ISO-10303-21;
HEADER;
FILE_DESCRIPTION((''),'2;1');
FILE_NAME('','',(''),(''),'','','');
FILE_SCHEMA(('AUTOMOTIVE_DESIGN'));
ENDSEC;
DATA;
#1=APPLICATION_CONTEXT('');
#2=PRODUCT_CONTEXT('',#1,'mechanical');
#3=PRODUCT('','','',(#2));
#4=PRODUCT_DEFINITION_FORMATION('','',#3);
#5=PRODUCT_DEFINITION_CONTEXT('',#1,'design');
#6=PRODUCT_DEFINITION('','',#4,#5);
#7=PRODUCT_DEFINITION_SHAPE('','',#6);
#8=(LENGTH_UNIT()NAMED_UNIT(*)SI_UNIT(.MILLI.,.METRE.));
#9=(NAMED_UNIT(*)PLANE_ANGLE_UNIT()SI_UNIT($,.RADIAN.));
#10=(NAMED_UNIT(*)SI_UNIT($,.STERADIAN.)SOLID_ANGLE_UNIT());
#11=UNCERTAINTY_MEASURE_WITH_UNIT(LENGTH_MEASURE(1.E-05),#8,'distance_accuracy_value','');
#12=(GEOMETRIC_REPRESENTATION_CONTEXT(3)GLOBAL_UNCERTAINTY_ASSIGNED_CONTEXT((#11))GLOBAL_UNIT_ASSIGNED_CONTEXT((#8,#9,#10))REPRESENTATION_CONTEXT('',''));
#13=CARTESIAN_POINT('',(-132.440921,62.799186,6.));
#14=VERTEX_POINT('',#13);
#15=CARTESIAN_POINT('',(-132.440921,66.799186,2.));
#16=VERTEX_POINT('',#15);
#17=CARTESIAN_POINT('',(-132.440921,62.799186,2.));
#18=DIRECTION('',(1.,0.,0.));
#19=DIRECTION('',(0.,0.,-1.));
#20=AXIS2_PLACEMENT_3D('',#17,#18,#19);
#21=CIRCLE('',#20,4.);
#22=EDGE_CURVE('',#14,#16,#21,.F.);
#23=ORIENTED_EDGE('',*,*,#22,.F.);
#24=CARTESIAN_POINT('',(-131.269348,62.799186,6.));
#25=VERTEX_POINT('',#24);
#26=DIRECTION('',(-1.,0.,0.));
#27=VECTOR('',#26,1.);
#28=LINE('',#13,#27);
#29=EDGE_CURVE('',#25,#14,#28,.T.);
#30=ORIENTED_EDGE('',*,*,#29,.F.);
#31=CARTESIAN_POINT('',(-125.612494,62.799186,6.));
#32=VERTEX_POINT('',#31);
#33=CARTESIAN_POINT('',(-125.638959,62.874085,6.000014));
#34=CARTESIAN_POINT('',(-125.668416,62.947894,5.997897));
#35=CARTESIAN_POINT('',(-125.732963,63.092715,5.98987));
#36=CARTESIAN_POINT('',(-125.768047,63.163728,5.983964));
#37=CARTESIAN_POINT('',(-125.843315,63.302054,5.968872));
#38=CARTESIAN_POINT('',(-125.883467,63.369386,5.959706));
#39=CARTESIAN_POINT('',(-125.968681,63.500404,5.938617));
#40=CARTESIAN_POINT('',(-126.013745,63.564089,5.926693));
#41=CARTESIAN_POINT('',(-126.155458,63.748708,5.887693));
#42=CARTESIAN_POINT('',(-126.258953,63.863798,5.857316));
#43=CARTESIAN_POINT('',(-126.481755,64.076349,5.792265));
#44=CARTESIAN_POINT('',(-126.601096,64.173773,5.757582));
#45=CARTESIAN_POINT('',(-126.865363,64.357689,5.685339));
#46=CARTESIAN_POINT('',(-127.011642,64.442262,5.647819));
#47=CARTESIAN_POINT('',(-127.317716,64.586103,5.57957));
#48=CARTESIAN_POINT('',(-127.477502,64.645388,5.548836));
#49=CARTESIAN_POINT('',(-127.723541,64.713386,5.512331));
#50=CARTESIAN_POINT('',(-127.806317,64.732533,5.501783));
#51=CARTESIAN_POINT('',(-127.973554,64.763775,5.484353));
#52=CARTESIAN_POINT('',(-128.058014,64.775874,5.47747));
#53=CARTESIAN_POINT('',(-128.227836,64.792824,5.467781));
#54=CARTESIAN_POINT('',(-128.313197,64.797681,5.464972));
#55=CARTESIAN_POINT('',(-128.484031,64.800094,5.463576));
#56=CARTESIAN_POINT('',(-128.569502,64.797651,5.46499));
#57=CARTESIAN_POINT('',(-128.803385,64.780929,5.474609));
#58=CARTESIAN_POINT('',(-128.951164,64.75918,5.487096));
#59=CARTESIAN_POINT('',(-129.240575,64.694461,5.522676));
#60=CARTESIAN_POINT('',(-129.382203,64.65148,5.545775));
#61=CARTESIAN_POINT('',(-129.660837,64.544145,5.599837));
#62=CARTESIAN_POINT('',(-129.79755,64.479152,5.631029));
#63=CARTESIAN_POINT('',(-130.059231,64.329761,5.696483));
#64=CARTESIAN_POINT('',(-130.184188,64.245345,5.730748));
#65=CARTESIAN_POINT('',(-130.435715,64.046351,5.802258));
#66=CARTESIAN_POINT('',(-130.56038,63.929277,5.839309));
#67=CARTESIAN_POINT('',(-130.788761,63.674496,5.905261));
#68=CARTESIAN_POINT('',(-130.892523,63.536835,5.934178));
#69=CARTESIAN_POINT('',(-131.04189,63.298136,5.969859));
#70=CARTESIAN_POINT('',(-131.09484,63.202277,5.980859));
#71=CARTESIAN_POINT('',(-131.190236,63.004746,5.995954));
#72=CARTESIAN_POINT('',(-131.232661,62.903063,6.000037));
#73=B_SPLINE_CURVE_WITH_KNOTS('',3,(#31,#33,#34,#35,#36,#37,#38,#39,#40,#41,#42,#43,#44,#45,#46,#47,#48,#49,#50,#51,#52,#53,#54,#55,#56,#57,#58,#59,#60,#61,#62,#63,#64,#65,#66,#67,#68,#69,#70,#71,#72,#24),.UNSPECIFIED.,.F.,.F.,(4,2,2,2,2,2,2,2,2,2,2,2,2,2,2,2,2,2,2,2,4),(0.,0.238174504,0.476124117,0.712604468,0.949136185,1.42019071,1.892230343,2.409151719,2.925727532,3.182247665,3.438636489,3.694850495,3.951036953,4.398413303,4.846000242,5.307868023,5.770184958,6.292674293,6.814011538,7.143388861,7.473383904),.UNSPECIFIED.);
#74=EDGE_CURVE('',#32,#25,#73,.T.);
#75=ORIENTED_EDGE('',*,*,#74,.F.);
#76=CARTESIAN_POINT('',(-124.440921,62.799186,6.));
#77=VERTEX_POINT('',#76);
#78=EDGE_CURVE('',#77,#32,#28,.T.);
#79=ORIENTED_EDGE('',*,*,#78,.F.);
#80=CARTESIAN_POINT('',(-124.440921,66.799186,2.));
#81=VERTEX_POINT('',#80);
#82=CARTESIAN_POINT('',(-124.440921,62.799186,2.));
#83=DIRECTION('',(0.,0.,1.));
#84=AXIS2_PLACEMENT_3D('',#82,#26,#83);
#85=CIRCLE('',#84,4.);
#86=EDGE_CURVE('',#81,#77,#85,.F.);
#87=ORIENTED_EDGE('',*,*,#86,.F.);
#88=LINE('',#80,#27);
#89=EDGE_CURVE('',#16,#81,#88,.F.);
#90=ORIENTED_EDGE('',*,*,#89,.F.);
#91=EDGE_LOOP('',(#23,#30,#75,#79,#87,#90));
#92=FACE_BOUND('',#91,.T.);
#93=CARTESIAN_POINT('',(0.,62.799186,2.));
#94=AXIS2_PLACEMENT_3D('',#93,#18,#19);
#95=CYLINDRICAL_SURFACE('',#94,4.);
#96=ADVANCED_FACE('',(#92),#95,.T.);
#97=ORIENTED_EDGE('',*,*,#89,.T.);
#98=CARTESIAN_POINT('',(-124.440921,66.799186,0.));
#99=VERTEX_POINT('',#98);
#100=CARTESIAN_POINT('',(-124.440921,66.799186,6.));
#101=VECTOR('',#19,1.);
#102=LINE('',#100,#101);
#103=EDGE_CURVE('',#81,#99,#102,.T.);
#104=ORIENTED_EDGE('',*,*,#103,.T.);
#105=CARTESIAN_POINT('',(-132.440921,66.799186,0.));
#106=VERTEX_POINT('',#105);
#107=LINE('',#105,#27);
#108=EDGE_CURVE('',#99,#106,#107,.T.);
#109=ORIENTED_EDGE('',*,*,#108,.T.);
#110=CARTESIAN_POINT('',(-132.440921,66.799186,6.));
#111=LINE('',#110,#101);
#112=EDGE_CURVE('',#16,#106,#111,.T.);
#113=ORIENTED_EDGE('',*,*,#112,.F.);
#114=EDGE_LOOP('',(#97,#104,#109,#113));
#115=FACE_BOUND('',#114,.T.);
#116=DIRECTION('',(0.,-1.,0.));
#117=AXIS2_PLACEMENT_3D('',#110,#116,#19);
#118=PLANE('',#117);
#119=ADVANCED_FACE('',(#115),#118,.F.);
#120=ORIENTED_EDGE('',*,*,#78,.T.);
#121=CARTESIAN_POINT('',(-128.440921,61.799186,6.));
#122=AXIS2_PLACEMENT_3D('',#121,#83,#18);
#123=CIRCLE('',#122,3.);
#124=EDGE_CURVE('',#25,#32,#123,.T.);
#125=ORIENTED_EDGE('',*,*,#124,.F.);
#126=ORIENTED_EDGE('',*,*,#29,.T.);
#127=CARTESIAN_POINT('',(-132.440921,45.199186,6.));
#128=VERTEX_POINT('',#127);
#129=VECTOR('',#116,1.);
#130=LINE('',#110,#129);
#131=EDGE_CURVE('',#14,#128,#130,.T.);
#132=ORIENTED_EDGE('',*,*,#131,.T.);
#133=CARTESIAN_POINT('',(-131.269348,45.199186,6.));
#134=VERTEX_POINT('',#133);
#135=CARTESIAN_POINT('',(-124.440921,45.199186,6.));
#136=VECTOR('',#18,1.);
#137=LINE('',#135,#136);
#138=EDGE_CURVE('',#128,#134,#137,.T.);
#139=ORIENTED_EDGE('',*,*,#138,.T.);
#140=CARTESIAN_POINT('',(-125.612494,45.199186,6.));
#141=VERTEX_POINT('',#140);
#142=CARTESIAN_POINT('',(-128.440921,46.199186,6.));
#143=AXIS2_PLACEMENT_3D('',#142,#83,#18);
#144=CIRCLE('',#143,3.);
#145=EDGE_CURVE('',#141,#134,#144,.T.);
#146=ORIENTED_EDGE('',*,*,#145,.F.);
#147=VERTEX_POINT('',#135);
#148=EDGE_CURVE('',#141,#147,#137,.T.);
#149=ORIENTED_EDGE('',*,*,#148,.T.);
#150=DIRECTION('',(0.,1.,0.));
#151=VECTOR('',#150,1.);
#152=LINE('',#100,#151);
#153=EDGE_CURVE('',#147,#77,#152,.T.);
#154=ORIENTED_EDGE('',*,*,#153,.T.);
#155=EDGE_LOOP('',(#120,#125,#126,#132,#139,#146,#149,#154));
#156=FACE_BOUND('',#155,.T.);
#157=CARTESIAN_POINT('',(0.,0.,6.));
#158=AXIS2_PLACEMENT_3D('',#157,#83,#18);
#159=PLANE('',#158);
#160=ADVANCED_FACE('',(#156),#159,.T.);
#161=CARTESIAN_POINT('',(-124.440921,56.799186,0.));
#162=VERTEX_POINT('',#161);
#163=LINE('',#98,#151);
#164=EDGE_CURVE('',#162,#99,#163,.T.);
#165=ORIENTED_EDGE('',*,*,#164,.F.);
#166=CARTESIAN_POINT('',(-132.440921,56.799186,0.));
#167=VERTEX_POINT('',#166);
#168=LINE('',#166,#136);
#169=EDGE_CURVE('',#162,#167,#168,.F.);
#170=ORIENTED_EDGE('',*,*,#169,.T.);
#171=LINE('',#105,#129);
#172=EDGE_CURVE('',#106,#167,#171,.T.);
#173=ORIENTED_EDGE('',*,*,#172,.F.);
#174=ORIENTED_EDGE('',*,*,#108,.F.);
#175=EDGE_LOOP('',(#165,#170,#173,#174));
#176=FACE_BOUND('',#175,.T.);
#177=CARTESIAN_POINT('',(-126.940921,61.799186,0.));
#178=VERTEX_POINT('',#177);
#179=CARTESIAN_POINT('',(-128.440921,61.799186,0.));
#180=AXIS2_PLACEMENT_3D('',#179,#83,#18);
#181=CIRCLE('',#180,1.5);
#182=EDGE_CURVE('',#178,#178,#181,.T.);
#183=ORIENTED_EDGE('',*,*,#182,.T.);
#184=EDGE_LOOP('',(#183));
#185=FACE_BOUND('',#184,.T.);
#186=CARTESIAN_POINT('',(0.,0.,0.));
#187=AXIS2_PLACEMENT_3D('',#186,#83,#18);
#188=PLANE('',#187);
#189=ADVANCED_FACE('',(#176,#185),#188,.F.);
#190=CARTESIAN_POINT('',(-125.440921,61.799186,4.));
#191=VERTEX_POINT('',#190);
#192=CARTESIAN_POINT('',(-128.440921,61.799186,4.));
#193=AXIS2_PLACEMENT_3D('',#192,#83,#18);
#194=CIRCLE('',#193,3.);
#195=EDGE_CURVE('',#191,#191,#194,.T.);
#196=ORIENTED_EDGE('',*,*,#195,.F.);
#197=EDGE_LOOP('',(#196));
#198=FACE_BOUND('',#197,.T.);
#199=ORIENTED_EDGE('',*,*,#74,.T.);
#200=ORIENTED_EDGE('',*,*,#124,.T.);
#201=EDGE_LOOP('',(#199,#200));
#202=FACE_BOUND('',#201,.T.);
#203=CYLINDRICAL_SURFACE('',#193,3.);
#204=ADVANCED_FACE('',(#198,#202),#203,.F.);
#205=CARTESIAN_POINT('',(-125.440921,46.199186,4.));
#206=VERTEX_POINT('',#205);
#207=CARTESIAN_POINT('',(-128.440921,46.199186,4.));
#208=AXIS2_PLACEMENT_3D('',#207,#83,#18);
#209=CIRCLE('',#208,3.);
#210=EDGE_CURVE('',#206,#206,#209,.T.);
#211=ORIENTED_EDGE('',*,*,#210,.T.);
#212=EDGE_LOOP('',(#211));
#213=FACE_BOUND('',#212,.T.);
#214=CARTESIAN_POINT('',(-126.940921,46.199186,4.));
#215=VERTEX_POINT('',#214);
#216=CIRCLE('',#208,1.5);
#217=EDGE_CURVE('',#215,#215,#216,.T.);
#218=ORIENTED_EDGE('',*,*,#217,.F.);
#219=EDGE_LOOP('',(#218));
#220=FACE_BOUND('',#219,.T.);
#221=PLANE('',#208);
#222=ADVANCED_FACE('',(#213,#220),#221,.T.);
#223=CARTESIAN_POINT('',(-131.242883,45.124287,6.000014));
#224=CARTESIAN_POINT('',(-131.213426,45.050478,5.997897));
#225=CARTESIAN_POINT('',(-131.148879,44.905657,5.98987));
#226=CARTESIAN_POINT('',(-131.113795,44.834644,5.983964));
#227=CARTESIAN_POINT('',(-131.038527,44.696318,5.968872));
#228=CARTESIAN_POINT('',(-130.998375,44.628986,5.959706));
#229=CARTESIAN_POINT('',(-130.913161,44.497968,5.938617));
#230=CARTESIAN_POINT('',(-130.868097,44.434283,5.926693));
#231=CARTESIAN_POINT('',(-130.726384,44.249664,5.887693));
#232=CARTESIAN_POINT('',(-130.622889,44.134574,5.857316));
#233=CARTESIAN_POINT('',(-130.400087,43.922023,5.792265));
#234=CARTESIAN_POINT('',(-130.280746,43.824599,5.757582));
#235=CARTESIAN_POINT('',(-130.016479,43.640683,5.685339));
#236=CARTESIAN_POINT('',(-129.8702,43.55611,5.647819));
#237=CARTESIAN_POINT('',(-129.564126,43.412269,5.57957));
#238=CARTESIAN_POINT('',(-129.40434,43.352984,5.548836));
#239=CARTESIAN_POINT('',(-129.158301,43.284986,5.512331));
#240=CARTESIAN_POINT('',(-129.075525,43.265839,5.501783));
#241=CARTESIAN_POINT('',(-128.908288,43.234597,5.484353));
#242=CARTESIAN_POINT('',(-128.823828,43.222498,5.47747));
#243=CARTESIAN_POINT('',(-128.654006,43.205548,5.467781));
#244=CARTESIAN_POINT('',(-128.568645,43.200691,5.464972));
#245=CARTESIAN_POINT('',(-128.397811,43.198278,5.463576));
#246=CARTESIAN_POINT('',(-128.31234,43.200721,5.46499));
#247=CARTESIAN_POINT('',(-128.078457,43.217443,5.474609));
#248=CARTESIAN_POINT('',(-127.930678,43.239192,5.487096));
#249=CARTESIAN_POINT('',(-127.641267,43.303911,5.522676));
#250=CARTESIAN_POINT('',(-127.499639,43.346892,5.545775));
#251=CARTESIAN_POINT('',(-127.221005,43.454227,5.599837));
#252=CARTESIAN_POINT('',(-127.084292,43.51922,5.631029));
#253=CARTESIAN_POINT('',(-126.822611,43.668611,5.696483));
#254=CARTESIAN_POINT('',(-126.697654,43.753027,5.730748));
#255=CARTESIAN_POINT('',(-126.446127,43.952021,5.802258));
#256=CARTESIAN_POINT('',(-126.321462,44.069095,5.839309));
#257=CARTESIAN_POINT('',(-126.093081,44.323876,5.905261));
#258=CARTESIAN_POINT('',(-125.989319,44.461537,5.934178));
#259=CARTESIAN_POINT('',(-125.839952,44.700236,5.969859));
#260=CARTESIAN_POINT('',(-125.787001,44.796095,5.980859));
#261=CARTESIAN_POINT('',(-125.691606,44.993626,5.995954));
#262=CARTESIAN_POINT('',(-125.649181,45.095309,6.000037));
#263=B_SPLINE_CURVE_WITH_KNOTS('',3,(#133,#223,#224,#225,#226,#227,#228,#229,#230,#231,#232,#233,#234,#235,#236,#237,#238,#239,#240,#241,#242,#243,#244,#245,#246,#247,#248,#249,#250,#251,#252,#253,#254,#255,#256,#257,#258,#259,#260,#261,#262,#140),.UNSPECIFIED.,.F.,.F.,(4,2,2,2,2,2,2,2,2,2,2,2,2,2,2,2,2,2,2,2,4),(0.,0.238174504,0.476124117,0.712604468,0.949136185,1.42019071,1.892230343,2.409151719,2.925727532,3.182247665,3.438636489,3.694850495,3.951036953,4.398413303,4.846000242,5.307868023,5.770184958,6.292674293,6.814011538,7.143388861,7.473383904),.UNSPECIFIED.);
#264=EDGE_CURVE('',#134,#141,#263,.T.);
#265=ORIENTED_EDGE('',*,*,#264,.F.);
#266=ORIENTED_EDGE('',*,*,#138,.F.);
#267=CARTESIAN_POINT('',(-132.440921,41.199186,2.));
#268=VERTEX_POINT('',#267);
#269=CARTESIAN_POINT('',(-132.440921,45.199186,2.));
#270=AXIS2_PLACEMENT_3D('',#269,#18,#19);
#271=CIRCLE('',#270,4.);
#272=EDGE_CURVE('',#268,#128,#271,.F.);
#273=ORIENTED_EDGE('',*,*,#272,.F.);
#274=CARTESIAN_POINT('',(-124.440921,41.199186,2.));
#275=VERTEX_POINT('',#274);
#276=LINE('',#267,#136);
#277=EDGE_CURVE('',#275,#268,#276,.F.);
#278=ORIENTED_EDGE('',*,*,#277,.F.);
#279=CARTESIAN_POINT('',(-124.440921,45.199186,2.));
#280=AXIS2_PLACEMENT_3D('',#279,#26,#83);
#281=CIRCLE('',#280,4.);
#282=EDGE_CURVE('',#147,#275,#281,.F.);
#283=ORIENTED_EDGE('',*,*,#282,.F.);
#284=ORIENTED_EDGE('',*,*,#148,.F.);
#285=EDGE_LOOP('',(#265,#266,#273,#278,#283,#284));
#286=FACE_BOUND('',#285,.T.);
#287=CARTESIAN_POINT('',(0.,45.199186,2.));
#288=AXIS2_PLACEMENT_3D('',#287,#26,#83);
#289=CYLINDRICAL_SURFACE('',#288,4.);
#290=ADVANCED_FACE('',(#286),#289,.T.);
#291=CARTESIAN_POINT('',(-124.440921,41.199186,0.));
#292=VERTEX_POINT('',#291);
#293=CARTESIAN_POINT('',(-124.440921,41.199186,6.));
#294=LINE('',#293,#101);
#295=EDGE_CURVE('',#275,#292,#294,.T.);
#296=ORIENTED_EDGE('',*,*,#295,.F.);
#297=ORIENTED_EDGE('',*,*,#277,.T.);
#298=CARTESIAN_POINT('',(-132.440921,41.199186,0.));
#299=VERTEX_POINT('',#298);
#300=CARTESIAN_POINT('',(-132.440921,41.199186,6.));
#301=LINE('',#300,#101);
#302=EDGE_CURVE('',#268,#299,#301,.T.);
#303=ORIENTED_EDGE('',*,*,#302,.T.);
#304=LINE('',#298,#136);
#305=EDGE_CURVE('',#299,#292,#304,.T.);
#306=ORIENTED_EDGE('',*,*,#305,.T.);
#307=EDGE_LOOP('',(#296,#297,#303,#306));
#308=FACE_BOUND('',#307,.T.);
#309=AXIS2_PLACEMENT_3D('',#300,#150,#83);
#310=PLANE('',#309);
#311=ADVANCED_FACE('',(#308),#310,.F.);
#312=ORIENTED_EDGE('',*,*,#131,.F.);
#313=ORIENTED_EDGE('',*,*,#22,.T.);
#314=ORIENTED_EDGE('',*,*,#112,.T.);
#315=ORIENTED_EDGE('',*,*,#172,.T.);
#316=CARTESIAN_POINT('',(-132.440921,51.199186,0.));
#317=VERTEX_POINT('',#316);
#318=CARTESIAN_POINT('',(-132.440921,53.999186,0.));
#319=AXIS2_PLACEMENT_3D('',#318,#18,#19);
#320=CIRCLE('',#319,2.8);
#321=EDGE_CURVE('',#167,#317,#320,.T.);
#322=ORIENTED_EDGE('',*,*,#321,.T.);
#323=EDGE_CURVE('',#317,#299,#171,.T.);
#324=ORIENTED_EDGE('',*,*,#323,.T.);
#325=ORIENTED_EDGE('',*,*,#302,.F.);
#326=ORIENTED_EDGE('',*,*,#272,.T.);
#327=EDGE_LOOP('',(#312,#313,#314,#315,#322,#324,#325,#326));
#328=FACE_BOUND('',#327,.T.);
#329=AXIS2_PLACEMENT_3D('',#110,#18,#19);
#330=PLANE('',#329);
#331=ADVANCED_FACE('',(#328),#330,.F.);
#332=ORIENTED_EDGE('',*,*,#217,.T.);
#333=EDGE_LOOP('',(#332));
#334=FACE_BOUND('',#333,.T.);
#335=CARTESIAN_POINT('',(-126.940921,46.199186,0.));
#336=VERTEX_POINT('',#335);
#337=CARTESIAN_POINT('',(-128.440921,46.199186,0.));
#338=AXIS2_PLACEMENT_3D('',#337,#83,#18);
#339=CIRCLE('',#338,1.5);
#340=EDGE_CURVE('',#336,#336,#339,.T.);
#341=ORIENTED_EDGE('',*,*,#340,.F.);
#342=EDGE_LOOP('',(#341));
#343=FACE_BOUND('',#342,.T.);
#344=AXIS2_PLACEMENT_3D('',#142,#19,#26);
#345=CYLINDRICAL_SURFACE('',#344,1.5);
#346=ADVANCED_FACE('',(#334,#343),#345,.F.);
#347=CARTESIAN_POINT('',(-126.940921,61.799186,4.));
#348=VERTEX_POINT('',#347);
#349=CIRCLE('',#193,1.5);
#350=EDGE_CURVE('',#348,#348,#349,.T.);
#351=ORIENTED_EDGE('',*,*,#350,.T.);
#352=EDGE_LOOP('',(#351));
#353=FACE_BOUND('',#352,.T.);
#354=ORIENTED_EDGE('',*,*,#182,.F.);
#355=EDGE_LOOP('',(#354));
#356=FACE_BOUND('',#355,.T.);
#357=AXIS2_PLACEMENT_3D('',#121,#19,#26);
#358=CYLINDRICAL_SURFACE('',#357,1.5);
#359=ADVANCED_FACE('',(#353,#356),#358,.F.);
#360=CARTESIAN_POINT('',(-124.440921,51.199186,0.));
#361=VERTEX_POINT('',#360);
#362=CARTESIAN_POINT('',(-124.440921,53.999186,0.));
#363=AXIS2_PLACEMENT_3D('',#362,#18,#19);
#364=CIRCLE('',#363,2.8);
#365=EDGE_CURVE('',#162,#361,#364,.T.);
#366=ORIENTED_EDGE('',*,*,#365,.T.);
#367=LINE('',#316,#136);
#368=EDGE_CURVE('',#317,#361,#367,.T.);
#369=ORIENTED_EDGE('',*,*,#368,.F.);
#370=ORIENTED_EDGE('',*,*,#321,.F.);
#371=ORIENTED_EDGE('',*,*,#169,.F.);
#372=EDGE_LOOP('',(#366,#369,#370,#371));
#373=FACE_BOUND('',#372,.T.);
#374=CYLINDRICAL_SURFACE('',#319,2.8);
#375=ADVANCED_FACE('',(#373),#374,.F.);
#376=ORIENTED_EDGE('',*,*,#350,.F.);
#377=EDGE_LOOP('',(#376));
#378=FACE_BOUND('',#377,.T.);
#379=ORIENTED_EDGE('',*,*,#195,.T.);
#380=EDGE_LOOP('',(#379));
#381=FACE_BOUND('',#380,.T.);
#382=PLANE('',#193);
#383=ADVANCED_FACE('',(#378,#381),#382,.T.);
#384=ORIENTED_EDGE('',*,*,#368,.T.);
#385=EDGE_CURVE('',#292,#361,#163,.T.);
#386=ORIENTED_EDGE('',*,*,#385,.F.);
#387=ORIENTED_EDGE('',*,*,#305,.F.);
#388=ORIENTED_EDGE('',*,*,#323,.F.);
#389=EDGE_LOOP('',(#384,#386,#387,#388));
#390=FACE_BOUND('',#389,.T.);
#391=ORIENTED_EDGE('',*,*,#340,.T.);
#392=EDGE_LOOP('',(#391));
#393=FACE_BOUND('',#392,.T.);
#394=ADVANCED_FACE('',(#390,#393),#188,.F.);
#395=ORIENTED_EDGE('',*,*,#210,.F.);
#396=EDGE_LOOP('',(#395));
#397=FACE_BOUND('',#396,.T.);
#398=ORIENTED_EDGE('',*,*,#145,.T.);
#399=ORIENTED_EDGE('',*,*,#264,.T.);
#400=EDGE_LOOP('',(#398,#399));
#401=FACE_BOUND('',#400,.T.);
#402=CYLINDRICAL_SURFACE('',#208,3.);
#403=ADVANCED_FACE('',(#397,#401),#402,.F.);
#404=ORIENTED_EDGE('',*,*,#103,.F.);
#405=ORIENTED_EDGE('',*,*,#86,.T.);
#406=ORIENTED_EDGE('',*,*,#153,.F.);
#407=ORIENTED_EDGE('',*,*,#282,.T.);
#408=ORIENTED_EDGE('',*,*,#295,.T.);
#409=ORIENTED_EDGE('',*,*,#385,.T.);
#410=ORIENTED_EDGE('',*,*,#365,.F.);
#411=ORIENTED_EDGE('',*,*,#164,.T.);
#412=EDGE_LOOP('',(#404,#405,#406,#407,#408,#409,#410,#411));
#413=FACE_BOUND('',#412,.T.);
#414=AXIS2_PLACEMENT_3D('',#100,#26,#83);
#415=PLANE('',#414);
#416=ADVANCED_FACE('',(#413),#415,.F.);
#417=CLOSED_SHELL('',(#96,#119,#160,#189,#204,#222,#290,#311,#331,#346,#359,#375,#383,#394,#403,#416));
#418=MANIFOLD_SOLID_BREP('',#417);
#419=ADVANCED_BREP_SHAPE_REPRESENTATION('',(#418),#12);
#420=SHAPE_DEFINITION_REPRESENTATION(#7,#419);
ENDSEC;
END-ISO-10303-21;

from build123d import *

# Parameters (mm, degrees)
CROQUIS1_W              = 8
CROQUIS1_H              = 25.6
CROQUIS1_R              = 1.5
SALIENTE_EXTRUIR1_DEPTH = 6
REDONDEO1_R             = 4
CROQUIS2_R              = 3
CORTAR_EXTRUIR1_DEPTH   = 2
CROQUIS3_R              = 2.8
CORTAR_EXTRUIR2_DEPTH   = 8


with BuildPart() as part:
    # Croquis1 → Saliente-Extruir1 (new body)
    with BuildSketch(Plane.XY):
        with Locations((-128.440920984, 53.999185999)):
            Rectangle(CROQUIS1_W, CROQUIS1_H)
        with Locations((-128.440920984, 61.799185999)):
            Circle(CROQUIS1_R, mode=Mode.SUBTRACT)
        with Locations((-128.440920984, 46.199185999)):
            Circle(CROQUIS1_R, mode=Mode.SUBTRACT)
    extrude(amount=SALIENTE_EXTRUIR1_DEPTH)

    # Redondeo1
    # the kernel refuses this fillet: 4 mm, written as the material it takes off along each edge
    with BuildSketch(Plane(origin=(-142.440920984, 66.799185999, 6), x_dir=(0, 0, -1), z_dir=(1, 0, 0)), Plane(origin=(-114.440920984, 41.199185999, 6), x_dir=(0, 0, -1), z_dir=(-1, 0, 0))) as redondeo1_piece_1:
        with BuildLine():
            CenterArc((REDONDEO1_R, -REDONDEO1_R), REDONDEO1_R, 90, 90)
            Line((0, -REDONDEO1_R), (0, 0))
            Line((0, 0), (REDONDEO1_R, 0))
        make_face()
    extrude(amount=28, mode=Mode.SUBTRACT)

    # Croquis2 → Cortar-Extruir1 (cut)
    with BuildSketch(Plane.XY.offset(6)):
        with Locations((-128.440920984, 46.199185999)):
            Circle(CROQUIS2_R)
        with Locations((-128.440920984, 61.799185999)):
            Circle(CROQUIS2_R)
    extrude(amount=-CORTAR_EXTRUIR1_DEPTH, mode=Mode.SUBTRACT)

    # Croquis3 → Cortar-Extruir2 (cut)
    with BuildSketch(Plane(origin=(-124.440920984, 0, 0), x_dir=(0, 0, -1), z_dir=(1, 0, 0))):
        with Locations((0, 53.999185999)):
            Circle(CROQUIS3_R)
    extrude(amount=-CORTAR_EXTRUIR2_DEPTH, mode=Mode.SUBTRACT)


solid = part.part
